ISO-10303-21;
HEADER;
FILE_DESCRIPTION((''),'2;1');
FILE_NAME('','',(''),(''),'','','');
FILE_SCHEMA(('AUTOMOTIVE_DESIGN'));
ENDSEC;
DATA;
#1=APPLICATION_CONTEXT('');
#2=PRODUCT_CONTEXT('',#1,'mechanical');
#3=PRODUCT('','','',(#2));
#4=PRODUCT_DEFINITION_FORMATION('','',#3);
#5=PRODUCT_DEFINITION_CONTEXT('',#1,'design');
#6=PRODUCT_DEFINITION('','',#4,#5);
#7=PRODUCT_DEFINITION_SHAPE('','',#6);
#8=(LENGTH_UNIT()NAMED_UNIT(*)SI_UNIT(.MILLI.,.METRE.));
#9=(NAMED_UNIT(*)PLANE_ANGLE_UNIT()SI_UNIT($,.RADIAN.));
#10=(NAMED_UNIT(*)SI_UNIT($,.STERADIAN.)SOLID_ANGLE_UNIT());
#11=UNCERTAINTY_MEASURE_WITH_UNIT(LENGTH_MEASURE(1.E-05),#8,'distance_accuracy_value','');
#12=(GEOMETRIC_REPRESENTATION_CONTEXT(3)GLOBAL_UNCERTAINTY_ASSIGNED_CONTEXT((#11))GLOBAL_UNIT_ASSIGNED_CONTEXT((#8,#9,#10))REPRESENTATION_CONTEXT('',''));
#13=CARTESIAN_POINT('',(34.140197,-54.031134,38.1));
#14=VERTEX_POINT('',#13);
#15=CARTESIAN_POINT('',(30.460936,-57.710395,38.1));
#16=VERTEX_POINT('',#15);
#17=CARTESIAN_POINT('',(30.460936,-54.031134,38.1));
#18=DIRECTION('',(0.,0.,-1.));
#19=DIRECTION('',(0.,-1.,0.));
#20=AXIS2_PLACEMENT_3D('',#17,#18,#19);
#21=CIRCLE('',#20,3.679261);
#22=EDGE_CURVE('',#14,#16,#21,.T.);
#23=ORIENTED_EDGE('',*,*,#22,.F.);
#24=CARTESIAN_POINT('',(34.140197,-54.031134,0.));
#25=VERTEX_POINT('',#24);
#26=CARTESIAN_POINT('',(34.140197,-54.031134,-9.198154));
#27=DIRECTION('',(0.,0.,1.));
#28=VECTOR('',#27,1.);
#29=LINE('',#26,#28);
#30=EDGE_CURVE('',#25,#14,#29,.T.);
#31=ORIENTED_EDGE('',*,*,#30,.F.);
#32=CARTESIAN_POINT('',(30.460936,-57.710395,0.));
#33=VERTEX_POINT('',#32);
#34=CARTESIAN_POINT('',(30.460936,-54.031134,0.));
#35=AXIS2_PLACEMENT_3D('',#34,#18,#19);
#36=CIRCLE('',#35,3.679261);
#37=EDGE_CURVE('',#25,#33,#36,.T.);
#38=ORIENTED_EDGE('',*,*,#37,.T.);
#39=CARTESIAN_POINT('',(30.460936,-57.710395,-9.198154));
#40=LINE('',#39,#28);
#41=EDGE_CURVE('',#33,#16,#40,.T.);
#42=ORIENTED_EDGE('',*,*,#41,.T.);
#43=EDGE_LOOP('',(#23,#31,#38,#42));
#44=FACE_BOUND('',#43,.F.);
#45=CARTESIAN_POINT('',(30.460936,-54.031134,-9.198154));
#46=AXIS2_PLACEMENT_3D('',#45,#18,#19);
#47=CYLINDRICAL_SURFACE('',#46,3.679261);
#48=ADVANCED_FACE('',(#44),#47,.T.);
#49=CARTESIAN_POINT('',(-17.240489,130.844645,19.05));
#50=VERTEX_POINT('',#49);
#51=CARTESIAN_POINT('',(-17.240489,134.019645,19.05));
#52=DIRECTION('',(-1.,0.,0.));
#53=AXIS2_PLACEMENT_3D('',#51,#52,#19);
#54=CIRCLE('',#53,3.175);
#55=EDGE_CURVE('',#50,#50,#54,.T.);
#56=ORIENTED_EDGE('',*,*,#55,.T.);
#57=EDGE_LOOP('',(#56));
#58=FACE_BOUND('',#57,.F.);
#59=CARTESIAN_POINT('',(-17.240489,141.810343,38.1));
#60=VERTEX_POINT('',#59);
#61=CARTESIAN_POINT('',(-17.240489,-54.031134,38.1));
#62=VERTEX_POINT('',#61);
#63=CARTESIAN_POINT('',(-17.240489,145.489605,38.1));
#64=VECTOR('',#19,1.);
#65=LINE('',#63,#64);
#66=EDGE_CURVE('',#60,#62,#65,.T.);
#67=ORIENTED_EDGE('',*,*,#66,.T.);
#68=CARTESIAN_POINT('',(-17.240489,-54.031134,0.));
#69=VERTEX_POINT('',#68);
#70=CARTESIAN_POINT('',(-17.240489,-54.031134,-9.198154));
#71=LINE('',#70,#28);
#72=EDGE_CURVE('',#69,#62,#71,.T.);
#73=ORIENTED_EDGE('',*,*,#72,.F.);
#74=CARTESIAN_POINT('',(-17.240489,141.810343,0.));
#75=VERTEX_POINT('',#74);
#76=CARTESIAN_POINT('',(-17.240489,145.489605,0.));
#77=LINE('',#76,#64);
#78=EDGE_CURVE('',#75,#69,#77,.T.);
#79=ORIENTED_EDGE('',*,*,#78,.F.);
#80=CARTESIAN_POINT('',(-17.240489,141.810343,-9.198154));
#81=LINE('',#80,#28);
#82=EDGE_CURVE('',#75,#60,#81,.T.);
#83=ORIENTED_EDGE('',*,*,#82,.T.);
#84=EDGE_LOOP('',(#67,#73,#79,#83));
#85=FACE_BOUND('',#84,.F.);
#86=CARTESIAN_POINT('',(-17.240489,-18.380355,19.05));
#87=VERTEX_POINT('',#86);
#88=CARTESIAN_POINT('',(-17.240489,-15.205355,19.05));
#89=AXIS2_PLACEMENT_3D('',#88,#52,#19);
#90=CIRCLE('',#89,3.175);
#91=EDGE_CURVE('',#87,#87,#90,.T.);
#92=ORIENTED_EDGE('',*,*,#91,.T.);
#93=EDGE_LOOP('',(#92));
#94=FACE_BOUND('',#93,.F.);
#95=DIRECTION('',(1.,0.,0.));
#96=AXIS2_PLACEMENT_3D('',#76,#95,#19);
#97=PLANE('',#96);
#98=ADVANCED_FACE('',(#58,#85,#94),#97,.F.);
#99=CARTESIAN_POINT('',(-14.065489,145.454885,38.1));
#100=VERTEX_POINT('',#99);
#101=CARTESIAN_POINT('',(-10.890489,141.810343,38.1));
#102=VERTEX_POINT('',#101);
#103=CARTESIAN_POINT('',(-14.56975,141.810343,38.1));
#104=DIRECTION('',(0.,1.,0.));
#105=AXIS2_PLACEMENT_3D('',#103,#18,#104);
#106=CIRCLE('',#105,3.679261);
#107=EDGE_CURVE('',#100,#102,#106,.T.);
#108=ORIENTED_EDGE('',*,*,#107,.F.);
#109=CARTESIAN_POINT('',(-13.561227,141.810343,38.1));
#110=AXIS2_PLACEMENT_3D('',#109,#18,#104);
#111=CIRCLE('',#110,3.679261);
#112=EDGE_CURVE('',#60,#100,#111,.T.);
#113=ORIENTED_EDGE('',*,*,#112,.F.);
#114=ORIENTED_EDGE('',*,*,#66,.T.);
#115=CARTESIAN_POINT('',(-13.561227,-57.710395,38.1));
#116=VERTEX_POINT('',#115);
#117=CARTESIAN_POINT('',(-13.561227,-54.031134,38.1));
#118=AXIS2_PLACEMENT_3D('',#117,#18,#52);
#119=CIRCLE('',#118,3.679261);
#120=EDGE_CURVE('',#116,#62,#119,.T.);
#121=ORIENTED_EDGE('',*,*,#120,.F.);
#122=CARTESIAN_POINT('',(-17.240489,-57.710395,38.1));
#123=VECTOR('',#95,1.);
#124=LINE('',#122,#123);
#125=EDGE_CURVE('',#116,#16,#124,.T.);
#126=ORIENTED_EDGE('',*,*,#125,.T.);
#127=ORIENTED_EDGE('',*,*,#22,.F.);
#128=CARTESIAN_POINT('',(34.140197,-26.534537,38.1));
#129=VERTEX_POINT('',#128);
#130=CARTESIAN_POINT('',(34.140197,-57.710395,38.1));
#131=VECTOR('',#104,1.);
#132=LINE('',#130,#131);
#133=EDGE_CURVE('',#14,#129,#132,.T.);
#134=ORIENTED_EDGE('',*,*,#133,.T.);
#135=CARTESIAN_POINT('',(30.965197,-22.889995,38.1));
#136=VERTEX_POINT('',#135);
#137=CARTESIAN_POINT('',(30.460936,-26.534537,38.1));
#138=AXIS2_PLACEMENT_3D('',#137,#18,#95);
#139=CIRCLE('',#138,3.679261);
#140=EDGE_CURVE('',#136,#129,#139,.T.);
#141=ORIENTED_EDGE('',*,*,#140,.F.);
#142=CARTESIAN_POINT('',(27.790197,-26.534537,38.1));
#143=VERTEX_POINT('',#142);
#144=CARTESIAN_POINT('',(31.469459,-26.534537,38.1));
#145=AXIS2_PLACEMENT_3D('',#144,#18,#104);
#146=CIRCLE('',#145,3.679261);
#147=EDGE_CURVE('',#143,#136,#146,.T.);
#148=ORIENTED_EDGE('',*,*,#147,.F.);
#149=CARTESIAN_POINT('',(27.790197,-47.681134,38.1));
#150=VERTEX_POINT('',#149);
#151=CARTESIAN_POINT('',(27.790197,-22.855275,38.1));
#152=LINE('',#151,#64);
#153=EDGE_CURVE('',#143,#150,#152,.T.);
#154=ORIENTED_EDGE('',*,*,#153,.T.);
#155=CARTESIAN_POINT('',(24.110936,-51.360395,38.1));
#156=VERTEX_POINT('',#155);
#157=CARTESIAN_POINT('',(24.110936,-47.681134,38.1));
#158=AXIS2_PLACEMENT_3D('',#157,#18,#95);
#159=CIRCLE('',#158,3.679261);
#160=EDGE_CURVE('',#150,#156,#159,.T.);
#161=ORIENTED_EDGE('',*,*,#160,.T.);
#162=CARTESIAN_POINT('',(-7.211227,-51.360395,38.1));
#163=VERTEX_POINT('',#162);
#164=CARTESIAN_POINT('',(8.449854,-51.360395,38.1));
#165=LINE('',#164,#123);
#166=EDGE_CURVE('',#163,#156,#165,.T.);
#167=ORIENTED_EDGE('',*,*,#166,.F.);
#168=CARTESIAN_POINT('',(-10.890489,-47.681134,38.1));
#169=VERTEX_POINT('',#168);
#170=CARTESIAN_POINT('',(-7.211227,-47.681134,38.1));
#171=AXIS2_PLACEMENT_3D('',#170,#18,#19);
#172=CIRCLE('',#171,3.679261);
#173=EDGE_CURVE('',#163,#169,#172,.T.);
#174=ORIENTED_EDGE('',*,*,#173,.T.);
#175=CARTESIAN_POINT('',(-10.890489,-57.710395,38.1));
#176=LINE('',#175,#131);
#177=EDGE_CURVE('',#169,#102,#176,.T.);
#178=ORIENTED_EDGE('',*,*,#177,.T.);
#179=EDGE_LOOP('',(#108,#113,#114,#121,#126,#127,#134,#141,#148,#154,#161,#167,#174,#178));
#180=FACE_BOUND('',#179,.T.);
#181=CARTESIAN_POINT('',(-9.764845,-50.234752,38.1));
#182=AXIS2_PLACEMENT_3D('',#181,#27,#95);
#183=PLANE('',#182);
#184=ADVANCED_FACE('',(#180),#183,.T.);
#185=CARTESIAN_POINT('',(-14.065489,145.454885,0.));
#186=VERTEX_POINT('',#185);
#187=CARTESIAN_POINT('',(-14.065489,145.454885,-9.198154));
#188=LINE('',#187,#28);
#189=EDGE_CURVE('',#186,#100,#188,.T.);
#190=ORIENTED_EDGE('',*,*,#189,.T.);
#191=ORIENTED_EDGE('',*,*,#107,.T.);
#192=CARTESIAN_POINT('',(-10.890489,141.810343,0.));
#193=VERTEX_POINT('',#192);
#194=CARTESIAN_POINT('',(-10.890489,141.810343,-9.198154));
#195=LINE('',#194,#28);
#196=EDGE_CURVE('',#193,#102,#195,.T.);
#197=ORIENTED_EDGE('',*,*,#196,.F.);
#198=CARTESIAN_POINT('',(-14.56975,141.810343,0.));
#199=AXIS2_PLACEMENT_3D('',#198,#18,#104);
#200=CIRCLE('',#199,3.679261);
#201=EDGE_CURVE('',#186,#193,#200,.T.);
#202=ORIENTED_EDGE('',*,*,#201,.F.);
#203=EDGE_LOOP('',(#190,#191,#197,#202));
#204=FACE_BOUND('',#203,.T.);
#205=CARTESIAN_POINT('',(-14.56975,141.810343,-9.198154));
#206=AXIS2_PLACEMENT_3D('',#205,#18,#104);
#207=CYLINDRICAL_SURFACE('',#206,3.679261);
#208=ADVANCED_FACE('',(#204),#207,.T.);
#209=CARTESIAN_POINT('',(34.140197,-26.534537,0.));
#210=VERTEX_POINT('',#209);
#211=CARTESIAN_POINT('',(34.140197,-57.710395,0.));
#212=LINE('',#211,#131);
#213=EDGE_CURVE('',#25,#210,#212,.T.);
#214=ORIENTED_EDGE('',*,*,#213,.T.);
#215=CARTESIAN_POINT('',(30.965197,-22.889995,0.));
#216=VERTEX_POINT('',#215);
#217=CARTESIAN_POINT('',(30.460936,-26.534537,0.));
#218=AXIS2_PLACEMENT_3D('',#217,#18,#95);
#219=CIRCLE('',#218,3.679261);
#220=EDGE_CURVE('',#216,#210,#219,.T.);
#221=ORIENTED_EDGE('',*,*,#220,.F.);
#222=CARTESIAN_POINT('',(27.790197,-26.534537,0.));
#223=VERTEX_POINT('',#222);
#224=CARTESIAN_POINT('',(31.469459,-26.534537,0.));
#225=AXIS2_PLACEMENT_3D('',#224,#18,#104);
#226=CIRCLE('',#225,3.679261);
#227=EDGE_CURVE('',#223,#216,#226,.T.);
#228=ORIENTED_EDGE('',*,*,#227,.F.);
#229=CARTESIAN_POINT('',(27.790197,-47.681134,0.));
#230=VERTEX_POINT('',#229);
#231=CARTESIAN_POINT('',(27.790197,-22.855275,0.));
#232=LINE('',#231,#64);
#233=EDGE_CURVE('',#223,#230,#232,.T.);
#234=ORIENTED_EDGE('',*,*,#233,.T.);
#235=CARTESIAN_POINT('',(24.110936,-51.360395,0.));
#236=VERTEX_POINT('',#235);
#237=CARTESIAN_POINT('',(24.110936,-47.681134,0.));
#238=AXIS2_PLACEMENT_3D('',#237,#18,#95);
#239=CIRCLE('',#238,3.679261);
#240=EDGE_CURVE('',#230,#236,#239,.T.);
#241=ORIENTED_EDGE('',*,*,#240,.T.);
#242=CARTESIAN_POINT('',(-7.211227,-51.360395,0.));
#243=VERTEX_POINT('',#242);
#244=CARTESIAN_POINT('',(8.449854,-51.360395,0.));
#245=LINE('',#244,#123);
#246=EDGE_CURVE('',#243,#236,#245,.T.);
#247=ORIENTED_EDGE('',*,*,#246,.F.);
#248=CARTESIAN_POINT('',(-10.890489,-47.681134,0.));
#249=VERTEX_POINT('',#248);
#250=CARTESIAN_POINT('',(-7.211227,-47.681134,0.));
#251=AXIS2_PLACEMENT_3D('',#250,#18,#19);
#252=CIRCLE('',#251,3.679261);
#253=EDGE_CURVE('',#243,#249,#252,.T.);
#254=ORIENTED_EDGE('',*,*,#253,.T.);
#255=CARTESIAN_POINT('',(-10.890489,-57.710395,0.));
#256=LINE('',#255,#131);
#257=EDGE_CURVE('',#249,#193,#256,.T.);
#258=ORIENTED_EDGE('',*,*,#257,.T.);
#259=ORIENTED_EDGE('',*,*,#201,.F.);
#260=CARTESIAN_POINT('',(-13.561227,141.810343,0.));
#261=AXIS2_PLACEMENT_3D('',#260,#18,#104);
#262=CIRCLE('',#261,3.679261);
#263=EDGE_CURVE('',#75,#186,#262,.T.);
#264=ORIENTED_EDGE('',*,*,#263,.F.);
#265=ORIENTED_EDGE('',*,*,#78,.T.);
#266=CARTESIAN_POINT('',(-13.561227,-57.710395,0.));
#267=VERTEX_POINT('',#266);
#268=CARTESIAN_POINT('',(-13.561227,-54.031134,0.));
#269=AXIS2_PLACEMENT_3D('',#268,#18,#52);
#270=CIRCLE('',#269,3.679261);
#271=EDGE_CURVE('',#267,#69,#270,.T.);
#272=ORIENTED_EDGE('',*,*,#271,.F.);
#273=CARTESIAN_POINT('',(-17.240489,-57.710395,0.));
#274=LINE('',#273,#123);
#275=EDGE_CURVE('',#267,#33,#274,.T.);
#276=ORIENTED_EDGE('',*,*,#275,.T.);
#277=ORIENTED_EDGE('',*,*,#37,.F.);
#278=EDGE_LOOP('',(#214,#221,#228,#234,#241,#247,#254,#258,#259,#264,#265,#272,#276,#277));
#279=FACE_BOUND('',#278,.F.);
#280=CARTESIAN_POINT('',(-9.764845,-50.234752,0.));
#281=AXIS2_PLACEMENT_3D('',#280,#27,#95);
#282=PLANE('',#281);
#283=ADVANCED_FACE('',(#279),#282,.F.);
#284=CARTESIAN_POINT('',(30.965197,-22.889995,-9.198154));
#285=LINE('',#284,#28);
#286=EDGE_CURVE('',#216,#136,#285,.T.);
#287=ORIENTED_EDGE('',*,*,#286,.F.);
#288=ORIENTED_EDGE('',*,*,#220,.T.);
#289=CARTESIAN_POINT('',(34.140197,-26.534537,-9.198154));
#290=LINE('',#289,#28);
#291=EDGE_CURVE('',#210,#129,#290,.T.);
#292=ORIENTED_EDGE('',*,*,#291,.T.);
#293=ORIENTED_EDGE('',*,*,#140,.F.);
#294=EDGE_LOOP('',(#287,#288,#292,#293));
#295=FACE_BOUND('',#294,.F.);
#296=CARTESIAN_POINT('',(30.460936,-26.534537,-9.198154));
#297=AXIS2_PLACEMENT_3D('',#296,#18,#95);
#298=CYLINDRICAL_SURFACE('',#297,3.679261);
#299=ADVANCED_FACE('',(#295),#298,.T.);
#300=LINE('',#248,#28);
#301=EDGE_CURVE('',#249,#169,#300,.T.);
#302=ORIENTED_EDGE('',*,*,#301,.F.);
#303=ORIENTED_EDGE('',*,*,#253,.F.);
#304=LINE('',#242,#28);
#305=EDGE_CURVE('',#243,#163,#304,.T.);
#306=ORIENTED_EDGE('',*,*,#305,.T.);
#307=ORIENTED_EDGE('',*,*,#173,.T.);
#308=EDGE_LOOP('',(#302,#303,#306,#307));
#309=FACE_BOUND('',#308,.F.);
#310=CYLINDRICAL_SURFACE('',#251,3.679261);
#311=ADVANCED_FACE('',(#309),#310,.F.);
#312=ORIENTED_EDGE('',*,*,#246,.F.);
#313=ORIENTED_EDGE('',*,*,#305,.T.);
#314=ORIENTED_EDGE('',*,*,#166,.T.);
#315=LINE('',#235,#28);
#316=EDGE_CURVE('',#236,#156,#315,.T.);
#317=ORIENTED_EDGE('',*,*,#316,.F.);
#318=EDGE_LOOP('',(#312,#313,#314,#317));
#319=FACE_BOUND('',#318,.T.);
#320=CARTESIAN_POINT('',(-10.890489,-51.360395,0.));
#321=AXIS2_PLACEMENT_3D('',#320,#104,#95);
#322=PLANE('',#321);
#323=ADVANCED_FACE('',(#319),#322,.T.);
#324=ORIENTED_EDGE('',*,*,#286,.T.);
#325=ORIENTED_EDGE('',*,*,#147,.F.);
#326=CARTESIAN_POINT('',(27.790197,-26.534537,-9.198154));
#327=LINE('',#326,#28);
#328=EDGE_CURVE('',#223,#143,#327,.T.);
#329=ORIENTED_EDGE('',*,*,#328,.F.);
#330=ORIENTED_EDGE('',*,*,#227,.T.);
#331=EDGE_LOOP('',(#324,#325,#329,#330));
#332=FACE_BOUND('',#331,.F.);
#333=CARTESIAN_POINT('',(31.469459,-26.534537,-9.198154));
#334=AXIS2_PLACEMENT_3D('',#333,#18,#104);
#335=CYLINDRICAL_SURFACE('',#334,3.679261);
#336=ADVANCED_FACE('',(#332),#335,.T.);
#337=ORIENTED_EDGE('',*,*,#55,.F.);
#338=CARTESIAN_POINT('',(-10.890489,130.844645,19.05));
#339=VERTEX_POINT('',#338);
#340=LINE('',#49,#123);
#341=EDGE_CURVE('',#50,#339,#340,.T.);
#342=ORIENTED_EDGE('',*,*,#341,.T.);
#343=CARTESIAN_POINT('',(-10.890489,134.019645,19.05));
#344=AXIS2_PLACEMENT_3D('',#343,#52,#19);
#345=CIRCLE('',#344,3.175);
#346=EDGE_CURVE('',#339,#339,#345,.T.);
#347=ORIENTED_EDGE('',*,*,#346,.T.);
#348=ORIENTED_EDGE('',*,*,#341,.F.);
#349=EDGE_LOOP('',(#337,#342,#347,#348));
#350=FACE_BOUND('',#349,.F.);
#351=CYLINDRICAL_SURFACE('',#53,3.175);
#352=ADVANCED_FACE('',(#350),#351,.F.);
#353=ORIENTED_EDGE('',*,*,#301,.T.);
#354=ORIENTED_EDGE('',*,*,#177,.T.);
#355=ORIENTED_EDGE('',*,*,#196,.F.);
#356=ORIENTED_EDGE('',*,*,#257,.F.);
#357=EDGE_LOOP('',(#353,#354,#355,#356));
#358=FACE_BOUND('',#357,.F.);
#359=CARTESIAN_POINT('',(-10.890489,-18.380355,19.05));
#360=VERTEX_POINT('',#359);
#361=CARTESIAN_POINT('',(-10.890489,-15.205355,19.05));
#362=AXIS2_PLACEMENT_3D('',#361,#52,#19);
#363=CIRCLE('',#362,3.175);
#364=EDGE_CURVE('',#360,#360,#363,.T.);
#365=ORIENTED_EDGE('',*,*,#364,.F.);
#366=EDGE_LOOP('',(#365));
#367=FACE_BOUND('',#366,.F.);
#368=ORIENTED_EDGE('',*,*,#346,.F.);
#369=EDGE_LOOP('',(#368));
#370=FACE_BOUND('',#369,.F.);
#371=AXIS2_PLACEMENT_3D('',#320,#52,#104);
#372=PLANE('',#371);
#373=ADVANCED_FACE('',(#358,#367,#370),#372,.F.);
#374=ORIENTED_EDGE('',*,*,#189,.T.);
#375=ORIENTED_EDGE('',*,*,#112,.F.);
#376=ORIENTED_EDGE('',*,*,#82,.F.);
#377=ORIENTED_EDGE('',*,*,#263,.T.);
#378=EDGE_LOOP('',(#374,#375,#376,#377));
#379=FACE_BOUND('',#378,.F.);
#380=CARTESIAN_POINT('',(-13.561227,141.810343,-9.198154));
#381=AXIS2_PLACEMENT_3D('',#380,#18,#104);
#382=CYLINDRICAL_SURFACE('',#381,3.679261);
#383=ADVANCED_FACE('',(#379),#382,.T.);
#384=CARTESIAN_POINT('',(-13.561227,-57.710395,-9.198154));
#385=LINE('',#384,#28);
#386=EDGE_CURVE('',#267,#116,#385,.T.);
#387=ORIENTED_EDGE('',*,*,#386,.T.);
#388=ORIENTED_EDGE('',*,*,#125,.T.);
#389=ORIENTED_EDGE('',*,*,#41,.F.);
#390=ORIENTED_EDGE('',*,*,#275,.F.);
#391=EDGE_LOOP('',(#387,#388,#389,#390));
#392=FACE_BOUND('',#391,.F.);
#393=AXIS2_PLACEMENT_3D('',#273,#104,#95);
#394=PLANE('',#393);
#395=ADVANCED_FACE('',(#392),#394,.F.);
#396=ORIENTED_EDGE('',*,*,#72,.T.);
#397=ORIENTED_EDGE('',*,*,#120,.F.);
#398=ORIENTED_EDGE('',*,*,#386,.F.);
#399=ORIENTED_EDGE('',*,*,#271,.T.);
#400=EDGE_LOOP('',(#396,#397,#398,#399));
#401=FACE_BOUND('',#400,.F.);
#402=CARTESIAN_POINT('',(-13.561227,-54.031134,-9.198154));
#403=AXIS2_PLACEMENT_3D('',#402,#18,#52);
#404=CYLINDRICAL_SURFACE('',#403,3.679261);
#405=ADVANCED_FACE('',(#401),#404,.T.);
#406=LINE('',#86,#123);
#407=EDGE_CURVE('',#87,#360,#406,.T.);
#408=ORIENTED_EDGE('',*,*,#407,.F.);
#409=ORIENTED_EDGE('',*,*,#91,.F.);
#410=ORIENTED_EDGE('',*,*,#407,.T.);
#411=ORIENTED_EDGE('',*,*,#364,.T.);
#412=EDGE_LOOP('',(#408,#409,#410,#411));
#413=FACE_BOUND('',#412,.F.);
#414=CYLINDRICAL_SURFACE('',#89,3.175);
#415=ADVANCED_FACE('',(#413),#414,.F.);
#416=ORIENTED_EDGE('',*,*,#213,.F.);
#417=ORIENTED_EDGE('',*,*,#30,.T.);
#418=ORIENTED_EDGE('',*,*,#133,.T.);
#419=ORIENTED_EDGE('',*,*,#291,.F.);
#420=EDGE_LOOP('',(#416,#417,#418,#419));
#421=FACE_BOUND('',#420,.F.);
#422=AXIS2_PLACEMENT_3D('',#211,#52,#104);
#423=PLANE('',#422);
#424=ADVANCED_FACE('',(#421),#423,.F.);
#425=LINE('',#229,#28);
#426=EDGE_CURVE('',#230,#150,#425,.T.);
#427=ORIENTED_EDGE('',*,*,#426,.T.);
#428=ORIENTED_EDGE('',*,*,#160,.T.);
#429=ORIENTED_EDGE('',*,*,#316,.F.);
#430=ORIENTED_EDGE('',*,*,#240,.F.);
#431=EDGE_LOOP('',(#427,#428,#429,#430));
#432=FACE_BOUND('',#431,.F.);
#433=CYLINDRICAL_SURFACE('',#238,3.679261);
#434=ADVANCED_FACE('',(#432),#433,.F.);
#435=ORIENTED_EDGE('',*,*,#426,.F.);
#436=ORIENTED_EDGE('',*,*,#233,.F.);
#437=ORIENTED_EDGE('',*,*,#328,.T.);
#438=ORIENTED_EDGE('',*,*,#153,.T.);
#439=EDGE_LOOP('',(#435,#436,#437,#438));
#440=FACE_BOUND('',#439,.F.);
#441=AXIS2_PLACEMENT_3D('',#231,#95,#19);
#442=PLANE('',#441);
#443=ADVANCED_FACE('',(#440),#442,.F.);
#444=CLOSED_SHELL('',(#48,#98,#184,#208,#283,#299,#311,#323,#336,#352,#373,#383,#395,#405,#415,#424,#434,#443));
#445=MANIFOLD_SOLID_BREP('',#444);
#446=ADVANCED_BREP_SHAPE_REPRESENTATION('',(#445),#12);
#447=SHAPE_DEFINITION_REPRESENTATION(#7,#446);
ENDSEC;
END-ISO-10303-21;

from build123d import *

# Parameters (mm, degrees)
F0_W        = 38.6806862377
F0_H        = 6.35
F1_DEPTH    = 38.1
F2_T1_DEPTH = 38.1
F2_T3_DEPTH = 56.4963073453
F3_R        = 3.175
F4_DEPTH    = 25.4


# Not quite as in the source:
# - a fillet or chamfer that OpenCascade refuses, or shapes differently, is made with other operations: its cross-section is extruded or revolved along the edge and cut away or added


with BuildPart() as f1:
    # F0 (on Top) → F1 (new body)
    with BuildSketch(Plane.XY):
        Polygon((-10.8904888918, 145.4896045446), (-17.2404888918, 145.4896045446), (-17.2404888918, -57.7103954554), (-10.8904888918, -57.7103954554), (-10.8904888918, -51.3603954554), align=None)
        with Locations((8.449854227, -54.5353954554)):
            Rectangle(F0_W, F0_H)
        Polygon((27.7901973458, -22.8552754367), (27.7901973458, -51.3603954554), (27.7901973458, -57.7103954554), (34.1401973458, -57.7103954554), (34.1401973458, -22.8552754367), align=None)
    extrude(amount=F1_DEPTH)

    # F2: fillet of radius 3.6792614691 on 8 edges, made by hand

    # F2_s2 → F2_t1 (join)
    with BuildSketch(Plane.XY):
        with BuildLine():
            ThreePointArc((-7.2112274228, -51.3603954554), (-9.8128581573, -50.2827647208), (-10.8904888918, -47.6811339863))
            Line((-10.8904888918, -47.6811339863), (-10.8904888918, -51.3603954554))
            Line((-10.8904888918, -51.3603954554), (-7.2112274228, -51.3603954554))
        make_face()
        with BuildLine():
            ThreePointArc((27.7901973458, -47.6811339863), (26.7125666113, -50.2827647208), (24.1109358768, -51.3603954554))
            Line((24.1109358768, -51.3603954554), (27.7901973458, -51.3603954554))
            Line((27.7901973458, -51.3603954554), (27.7901973458, -47.6811339863))
        make_face()
    extrude(amount=F2_T1_DEPTH)

    # F2_s4 → F2_t3 (cut)
    with BuildSketch(Plane.XY.offset(-9.1981536726)):
        with BuildLine():
            ThreePointArc((31.4694588149, -22.8552754367), (28.8678280803, -23.9329061712), (27.7901973458, -26.5345369057))
            Line((27.7901973458, -26.5345369057), (27.7901973458, -22.8552754367))
            Line((27.7901973458, -22.8552754367), (31.4694588149, -22.8552754367))
        make_face()
        with BuildLine():
            ThreePointArc((34.1401973458, -26.5345369057), (33.0625666113, -23.9329061712), (30.4609358768, -22.8552754367))
            Line((30.4609358768, -22.8552754367), (34.1401973458, -22.8552754367))
            Line((34.1401973458, -22.8552754367), (34.1401973458, -26.5345369057))
        make_face()
        with BuildLine():
            ThreePointArc((-17.2404888918, -54.0311339863), (-16.1628581573, -56.6327647208), (-13.5612274228, -57.7103954554))
            Line((-13.5612274228, -57.7103954554), (-17.2404888918, -57.7103954554))
            Line((-17.2404888918, -57.7103954554), (-17.2404888918, -54.0311339863))
        make_face()
        with BuildLine():
            ThreePointArc((30.4609358768, -57.7103954554), (33.0625666113, -56.6327647208), (34.1401973458, -54.0311339863))
            Line((34.1401973458, -54.0311339863), (34.1401973458, -57.7103954554))
            Line((34.1401973458, -57.7103954554), (30.4609358768, -57.7103954554))
        make_face()
        with BuildLine():
            ThreePointArc((-14.5697503609, 145.4896045446), (-11.9681196264, 144.4119738101), (-10.8904888918, 141.8103430756))
            Line((-10.8904888918, 141.8103430756), (-10.8904888918, 145.4896045446))
            Line((-10.8904888918, 145.4896045446), (-14.5697503609, 145.4896045446))
        make_face()
        with BuildLine():
            ThreePointArc((-13.5612274228, 145.4896045446), (-16.1628581573, 144.4119738101), (-17.2404888918, 141.8103430756))
            Line((-17.2404888918, 141.8103430756), (-17.2404888918, 145.4896045446))
            Line((-17.2404888918, 145.4896045446), (-13.5612274228, 145.4896045446))
        make_face()
    extrude(amount=F2_T3_DEPTH, mode=Mode.SUBTRACT)

    # F3 (on face) → F4 (cut)
    with BuildSketch(Plane(origin=(-17.2404888918, 0, 0), x_dir=(0, -1, 0), z_dir=(-1, 0, 0))):
        with Locations((-134.0196450753, 19.05)):
            Circle(F3_R)
        with Locations((15.2053549247, 19.05)):
            Circle(F3_R)
    extrude(amount=-F4_DEPTH, mode=Mode.SUBTRACT)


solid = f1.part
